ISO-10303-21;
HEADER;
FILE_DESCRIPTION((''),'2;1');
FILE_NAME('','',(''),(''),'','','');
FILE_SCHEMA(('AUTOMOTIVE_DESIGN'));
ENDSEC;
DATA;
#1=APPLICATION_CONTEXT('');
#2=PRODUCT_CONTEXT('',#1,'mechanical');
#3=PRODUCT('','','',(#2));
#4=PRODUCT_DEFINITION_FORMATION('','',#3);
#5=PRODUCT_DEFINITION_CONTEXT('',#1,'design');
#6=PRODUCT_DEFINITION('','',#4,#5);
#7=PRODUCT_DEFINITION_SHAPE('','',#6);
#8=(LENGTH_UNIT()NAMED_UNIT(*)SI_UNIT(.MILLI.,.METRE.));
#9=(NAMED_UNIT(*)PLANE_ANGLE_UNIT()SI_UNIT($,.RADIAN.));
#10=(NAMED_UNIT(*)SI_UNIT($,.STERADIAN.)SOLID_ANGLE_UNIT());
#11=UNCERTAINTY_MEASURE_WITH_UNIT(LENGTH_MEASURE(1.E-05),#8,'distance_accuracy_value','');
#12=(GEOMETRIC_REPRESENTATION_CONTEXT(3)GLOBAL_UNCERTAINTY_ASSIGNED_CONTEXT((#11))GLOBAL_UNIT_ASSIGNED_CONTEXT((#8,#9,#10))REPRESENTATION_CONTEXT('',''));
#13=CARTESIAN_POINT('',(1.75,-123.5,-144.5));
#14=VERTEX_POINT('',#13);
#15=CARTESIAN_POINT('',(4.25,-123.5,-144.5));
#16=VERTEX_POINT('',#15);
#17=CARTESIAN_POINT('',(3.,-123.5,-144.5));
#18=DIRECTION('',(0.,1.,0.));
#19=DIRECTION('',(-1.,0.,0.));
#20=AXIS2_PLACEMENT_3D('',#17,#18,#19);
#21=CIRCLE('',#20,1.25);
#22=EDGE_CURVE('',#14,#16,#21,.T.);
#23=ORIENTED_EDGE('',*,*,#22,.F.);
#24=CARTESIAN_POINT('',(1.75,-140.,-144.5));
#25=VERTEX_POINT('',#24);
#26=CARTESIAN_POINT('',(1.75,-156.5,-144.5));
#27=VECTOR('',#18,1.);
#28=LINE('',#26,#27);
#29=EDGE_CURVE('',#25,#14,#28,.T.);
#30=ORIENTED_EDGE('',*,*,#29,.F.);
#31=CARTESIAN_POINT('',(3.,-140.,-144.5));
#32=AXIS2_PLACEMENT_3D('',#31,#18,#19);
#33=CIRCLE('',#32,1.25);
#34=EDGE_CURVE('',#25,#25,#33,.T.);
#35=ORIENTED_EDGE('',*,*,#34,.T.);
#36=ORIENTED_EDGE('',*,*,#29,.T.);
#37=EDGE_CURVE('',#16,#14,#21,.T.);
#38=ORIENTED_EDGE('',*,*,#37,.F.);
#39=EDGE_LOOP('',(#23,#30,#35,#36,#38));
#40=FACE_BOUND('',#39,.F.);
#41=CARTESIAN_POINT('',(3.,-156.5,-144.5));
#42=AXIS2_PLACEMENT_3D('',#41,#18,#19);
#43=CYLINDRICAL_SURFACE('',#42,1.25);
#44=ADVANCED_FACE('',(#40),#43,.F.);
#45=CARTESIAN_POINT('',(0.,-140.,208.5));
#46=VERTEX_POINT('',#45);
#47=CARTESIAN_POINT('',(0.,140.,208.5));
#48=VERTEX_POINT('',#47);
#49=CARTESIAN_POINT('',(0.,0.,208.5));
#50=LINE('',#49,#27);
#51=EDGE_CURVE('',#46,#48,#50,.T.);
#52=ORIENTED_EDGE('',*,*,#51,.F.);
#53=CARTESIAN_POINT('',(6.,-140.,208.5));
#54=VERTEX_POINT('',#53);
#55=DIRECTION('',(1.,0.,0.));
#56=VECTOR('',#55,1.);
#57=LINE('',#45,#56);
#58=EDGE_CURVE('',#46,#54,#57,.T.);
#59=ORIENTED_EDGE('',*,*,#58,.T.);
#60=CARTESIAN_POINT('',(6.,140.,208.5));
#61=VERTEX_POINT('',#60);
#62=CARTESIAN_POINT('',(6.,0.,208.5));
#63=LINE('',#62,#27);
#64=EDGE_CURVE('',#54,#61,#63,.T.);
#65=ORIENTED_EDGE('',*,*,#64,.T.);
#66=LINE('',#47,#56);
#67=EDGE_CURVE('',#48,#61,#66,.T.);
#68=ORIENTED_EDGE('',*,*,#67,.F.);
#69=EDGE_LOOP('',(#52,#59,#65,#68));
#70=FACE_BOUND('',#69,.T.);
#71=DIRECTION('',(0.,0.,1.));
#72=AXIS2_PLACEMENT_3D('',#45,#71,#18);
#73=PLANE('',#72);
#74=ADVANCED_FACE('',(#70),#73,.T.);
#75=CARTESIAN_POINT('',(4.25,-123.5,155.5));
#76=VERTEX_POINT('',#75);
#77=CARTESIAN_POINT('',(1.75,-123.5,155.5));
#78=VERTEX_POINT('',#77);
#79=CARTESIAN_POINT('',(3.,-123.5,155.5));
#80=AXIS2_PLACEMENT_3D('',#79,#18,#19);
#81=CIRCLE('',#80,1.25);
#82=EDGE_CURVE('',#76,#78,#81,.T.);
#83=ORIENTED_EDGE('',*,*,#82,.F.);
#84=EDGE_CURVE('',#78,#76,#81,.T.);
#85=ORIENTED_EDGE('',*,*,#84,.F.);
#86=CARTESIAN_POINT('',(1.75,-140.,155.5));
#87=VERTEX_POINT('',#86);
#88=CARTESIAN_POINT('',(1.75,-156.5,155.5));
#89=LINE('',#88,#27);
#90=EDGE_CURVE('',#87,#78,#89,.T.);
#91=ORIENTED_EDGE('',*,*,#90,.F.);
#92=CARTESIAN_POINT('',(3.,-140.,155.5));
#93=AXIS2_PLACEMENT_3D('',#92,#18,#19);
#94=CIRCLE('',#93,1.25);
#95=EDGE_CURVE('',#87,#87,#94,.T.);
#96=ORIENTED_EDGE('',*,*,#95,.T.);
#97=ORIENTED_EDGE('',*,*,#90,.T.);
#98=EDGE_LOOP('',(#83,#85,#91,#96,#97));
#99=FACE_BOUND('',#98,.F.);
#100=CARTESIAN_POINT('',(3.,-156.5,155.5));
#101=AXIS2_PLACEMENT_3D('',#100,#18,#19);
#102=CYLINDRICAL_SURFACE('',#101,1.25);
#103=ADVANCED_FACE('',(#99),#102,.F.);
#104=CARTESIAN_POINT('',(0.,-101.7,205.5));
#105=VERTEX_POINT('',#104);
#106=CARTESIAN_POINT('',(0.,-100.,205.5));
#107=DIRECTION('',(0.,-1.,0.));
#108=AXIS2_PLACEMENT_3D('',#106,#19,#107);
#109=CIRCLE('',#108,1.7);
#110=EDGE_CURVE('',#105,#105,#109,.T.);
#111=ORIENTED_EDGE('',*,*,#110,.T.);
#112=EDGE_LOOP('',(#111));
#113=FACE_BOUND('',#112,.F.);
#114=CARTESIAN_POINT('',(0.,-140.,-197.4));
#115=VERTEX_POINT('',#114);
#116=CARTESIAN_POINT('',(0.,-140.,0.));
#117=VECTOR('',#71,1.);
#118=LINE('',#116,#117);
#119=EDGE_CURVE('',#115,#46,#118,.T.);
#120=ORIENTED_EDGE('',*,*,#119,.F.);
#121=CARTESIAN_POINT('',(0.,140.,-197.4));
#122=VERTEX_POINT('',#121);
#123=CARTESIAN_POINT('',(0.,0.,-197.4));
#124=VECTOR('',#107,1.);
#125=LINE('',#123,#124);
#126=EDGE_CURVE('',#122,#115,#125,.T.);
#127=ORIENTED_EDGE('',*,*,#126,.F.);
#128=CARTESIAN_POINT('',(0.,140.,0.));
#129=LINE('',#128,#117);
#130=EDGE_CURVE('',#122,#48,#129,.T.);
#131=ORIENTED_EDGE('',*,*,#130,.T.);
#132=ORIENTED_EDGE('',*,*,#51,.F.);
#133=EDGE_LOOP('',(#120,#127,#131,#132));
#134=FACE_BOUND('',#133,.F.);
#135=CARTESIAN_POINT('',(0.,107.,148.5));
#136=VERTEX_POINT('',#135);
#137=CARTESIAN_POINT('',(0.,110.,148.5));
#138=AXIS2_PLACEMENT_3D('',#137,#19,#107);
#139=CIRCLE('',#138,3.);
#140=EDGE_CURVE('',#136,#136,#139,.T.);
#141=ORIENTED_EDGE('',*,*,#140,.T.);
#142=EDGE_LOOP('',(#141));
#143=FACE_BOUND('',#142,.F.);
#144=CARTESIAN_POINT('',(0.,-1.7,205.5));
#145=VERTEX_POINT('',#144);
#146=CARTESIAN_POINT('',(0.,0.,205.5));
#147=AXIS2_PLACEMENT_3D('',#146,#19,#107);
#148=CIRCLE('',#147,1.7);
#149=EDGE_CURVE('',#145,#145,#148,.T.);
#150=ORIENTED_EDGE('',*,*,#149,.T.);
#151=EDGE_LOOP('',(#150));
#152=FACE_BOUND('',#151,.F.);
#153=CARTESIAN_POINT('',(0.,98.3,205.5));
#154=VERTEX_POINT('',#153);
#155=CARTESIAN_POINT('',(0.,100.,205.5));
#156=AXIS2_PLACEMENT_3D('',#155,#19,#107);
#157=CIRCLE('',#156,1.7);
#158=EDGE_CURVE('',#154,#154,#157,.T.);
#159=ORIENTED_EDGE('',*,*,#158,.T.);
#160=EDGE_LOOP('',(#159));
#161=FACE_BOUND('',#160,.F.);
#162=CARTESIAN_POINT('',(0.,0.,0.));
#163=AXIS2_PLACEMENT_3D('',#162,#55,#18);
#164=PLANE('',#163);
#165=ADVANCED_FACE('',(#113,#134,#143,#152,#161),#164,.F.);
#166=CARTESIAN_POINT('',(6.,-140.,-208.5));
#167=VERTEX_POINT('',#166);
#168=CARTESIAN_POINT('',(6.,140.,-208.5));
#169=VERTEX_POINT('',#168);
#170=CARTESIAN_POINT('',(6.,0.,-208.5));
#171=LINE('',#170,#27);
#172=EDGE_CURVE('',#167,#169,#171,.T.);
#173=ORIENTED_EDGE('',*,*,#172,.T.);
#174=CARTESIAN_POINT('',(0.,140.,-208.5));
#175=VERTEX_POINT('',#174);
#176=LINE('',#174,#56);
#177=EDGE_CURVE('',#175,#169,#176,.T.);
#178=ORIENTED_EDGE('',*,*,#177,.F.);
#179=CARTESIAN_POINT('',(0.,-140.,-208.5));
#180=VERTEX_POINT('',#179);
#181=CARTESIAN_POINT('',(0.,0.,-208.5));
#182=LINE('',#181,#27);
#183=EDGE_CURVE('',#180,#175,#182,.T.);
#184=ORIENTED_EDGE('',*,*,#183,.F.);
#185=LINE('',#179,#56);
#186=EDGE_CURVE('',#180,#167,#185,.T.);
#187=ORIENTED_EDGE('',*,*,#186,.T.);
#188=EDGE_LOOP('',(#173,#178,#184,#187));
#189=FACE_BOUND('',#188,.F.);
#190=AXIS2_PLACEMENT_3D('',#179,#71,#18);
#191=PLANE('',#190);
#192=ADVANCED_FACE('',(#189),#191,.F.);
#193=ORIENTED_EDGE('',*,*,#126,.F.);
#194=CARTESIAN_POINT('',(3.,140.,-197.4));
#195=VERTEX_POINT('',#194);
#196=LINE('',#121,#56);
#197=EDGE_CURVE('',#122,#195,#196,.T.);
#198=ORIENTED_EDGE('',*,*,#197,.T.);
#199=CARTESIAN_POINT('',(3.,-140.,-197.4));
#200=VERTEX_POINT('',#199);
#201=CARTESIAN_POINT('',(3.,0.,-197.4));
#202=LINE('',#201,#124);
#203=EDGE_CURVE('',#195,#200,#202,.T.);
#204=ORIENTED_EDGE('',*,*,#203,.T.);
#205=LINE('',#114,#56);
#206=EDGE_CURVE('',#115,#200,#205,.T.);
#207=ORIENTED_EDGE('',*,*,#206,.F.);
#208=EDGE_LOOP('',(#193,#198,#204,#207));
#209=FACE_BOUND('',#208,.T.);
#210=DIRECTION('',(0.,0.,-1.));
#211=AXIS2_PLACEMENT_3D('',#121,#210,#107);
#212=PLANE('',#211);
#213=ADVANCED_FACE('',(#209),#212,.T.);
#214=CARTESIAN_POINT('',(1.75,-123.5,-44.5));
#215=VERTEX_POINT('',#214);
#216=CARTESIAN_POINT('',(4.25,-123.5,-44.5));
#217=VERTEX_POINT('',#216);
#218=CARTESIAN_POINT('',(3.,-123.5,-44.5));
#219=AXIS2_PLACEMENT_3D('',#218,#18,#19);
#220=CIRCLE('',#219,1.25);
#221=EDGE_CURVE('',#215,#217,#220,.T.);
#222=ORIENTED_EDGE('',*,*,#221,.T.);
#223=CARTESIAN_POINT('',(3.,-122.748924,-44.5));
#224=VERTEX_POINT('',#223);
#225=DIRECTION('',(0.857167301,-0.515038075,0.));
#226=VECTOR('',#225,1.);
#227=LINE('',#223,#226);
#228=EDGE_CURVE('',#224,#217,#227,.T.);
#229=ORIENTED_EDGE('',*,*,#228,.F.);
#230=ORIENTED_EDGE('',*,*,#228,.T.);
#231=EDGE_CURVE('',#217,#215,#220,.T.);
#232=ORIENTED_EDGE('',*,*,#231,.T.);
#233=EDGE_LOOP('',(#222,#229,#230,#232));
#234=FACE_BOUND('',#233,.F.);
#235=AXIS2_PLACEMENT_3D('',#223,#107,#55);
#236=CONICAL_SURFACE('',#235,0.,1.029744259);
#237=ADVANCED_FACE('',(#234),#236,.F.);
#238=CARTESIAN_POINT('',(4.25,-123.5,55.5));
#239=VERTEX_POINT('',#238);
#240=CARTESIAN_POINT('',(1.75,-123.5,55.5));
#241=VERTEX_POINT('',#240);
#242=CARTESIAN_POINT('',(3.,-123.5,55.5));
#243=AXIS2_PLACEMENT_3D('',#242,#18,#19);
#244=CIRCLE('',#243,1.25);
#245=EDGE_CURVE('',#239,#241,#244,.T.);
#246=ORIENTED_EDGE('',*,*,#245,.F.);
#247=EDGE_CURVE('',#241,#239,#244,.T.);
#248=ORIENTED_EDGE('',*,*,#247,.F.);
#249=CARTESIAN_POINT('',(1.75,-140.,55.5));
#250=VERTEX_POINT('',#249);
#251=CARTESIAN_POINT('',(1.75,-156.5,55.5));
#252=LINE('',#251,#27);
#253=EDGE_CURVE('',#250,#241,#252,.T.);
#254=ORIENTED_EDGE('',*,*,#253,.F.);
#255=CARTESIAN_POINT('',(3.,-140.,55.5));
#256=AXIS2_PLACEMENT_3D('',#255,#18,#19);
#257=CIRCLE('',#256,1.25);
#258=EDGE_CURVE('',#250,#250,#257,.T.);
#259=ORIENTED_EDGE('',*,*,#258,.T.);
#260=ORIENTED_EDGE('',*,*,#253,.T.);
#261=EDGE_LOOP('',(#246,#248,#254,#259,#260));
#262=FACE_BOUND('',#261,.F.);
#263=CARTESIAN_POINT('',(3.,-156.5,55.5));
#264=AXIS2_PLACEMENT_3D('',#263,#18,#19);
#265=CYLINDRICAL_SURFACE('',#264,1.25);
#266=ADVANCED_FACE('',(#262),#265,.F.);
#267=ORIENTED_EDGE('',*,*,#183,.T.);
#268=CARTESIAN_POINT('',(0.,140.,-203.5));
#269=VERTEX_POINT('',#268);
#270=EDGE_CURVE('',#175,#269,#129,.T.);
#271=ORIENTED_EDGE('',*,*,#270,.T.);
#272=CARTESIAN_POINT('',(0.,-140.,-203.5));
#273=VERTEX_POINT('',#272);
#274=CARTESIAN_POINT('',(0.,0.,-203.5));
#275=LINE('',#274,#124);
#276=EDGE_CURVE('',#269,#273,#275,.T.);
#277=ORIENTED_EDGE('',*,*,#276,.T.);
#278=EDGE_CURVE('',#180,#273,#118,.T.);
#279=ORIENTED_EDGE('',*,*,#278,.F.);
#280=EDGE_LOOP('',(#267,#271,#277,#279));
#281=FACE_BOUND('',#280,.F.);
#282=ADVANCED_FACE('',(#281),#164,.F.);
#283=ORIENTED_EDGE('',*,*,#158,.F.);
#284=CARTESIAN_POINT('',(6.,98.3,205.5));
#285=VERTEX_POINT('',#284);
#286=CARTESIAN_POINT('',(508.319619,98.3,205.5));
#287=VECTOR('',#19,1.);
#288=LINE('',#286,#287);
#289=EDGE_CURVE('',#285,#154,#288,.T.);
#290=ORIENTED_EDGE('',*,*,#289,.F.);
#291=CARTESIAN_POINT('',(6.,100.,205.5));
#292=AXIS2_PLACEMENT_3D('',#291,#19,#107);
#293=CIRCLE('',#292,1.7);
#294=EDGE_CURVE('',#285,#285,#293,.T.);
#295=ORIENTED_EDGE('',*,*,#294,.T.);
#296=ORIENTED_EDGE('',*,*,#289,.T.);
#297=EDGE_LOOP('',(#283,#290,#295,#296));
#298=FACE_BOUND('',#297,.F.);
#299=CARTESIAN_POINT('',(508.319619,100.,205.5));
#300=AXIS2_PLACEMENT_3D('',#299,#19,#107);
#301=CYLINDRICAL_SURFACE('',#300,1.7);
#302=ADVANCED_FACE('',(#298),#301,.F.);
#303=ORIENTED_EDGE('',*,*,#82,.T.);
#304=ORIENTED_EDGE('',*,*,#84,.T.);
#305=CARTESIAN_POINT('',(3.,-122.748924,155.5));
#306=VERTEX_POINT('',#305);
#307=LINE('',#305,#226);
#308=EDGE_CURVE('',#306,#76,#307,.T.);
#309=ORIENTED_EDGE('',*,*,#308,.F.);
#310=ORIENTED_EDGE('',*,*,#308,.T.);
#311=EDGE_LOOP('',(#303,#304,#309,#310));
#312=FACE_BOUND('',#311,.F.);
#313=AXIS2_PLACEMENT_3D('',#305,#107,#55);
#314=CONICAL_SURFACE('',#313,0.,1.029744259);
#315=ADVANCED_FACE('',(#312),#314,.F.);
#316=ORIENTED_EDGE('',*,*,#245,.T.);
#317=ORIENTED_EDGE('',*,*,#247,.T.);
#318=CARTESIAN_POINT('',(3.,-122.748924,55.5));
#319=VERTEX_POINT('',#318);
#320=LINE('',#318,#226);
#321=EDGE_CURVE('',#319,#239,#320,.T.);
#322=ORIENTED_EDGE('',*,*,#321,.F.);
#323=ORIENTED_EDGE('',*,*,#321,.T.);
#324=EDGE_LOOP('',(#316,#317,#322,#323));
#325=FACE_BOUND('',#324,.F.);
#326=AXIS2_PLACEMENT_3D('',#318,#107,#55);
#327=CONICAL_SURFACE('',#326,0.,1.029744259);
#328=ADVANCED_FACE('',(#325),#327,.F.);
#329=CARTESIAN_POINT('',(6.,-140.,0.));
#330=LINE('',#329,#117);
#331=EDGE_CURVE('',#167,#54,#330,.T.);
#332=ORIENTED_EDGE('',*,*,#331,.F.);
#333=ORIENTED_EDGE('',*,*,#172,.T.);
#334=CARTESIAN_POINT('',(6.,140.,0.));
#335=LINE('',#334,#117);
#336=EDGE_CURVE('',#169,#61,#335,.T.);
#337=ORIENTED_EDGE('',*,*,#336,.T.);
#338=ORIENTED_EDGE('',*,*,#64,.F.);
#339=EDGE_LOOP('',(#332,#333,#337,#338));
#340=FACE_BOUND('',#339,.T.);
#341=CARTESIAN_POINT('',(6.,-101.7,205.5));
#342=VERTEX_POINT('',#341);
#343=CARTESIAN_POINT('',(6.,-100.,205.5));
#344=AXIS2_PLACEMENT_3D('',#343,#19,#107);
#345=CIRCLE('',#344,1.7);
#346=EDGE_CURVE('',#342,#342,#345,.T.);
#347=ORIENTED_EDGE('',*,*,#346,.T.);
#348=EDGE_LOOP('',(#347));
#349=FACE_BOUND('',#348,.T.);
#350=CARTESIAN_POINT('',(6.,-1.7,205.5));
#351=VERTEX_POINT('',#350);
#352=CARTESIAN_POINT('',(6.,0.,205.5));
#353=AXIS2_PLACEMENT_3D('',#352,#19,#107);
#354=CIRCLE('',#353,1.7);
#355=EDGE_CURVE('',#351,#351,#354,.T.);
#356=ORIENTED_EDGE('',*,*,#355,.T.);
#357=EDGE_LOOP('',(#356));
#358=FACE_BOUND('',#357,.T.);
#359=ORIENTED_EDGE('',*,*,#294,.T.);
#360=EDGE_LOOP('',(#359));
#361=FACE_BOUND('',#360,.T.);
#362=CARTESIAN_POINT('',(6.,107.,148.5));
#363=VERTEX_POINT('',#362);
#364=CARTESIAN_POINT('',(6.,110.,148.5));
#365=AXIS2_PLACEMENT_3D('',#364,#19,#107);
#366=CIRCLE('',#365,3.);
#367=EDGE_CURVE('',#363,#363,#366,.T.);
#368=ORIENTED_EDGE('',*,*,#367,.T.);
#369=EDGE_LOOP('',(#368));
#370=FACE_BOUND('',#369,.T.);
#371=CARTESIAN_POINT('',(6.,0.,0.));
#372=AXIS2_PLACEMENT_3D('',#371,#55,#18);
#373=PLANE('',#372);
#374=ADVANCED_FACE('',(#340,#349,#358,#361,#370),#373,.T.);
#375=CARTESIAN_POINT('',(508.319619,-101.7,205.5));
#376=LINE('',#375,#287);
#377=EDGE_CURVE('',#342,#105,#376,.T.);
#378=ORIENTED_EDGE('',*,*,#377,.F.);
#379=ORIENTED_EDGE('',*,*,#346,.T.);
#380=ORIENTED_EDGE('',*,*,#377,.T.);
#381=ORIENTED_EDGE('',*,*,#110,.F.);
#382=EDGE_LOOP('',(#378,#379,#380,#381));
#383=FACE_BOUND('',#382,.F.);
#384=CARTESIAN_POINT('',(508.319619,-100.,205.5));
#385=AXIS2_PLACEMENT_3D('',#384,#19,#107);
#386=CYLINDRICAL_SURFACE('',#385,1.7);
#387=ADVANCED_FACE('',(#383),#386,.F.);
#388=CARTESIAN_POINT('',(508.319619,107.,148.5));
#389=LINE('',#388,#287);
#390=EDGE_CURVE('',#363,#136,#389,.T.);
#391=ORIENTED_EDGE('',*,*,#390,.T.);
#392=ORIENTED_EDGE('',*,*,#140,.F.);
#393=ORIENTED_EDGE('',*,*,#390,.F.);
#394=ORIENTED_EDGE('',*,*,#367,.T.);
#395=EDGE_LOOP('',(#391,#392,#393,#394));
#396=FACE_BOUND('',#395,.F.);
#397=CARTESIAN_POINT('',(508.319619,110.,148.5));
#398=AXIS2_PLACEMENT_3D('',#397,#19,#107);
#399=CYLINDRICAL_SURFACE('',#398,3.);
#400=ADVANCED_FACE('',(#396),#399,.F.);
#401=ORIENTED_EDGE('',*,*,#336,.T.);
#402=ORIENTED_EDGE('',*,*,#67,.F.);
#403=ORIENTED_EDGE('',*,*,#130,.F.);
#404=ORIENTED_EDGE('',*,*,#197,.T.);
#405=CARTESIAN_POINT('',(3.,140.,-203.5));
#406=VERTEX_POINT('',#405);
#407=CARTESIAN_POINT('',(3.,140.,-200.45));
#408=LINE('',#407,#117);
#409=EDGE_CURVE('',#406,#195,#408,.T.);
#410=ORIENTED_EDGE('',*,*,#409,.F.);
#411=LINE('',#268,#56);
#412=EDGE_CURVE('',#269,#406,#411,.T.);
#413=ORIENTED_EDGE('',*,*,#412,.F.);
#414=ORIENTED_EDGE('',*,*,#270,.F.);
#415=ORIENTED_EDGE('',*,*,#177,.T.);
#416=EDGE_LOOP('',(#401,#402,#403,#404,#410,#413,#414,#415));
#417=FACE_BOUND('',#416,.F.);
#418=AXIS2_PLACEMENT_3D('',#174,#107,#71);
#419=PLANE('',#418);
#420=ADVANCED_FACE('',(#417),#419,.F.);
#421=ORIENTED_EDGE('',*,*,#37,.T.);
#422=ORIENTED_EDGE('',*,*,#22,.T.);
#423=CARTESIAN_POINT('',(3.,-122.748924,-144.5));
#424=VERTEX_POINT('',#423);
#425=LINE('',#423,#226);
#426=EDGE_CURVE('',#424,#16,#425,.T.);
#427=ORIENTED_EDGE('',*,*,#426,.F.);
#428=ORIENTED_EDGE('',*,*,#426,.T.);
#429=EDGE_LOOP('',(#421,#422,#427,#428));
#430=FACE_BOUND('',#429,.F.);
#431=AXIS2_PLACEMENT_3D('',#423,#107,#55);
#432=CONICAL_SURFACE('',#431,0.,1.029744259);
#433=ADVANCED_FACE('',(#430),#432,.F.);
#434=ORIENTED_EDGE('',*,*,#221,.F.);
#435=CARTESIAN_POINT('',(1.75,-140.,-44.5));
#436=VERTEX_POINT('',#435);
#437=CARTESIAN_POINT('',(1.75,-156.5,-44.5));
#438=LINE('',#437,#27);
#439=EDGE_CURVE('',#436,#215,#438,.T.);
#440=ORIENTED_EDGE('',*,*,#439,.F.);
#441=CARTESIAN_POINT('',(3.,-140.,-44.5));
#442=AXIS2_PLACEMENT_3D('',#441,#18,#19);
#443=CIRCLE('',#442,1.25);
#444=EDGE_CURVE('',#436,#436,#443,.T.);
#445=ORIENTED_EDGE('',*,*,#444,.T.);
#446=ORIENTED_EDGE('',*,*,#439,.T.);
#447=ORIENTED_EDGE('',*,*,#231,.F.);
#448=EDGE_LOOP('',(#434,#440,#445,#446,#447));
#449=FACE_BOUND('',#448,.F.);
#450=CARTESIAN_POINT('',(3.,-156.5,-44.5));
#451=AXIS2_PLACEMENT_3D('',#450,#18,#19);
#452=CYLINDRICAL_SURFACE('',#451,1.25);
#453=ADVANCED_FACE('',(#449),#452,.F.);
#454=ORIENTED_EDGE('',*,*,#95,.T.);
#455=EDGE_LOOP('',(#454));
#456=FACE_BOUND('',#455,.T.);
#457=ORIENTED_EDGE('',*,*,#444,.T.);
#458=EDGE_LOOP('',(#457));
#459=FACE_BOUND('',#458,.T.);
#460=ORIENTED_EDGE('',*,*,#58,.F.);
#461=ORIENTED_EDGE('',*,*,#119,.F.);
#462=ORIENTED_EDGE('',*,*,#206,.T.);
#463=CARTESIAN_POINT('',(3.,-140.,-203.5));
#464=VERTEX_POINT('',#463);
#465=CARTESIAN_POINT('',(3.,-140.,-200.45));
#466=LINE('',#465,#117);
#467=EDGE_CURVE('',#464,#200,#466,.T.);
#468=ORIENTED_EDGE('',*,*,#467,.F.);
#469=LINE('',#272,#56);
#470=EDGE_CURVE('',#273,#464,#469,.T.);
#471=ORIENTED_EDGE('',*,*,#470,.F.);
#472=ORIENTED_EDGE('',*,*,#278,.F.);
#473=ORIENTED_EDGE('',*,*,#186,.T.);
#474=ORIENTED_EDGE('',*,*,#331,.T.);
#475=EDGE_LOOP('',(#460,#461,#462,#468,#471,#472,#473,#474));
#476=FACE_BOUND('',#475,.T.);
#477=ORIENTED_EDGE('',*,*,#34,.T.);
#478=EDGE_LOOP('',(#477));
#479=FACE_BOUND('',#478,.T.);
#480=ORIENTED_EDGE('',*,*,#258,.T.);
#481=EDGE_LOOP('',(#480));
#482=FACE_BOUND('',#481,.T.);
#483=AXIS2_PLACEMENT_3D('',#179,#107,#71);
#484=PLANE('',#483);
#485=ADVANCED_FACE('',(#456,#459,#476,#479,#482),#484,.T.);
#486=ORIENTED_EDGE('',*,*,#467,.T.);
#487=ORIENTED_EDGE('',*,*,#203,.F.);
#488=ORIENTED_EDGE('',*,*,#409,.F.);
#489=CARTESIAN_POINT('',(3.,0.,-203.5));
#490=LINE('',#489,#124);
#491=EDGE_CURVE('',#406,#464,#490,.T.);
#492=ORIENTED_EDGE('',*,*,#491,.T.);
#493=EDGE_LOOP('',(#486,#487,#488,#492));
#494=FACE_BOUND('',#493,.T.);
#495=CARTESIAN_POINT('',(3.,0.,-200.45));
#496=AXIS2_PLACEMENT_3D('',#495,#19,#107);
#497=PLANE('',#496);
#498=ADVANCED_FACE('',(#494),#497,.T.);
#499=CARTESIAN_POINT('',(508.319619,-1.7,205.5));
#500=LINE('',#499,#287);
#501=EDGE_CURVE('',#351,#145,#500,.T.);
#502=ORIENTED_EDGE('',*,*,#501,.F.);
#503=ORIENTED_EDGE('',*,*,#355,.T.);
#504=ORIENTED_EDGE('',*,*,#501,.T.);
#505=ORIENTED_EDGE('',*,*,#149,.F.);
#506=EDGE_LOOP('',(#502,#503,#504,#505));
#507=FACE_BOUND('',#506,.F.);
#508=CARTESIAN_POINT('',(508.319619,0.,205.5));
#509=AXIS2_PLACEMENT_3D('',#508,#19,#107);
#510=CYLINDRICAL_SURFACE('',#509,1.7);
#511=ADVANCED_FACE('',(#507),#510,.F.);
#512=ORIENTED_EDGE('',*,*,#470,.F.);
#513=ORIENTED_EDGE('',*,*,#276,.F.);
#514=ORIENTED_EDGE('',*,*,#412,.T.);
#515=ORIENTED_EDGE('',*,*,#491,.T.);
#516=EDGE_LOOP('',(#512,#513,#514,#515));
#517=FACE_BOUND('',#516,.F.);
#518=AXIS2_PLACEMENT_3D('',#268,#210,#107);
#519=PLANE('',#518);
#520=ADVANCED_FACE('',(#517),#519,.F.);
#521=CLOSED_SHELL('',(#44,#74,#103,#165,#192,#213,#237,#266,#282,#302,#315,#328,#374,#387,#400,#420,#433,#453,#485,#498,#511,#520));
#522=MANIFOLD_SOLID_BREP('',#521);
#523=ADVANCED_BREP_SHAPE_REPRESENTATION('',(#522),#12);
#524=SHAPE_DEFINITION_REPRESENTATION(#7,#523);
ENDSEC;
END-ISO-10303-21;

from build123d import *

# Parameters (mm, degrees)
F0_W      = 280
F0_H      = 417
F1_DEPTH  = 6
F3_D      = 3.4
F4_W      = 280
F4_H      = 6.1
F5_DEPTH  = 3
F8_D      = 2.5
F8_DEPTH  = 16.5
F8_TIP    = 0.7510757738
F9_D      = 6
F10_D     = 2.5
F10_DEPTH = 16.5
F10_TIP   = 0.7510757738


# Not quite as in the source:
# - a feature names something its author has since deleted; it is built from what else it names


with BuildPart() as f1:
    # F0 (on Right) → F1 (new body)
    with BuildSketch(Plane.YZ):
        Rectangle(F0_W, F0_H)
    extrude(amount=F1_DEPTH)

    # F3 (through all)
    with Locations(Plane.YZ.offset(6)):
        with Locations((100, 205.5), (0, 205.5), (-100, 205.5)):
            Hole(F3_D / 2)


with BuildPart() as f5:
    # F4 (on face) → F5 (new body)
    with BuildSketch(Plane(origin=(0, 0, 0), x_dir=(0, -1, 0), z_dir=(-1, 0, 0))):
        with Locations((0, -200.45)):
            Rectangle(F4_W, F4_H)
    extrude(amount=-F5_DEPTH)


with BuildPart() as f1_1:
    add(f1.part)

    # F6: cut F5
    add(f5.part, mode=Mode.SUBTRACT)

    # F8
    with Locations(Plane.XZ.offset(140)):
        with Locations((3, 155.5), (3, 55.5), (3, -44.5)):
            Hole(F8_D / 2, depth=F8_DEPTH)
            with Locations((0, 0, -(F8_DEPTH + F8_TIP / 2))):  # 118° drill point
                Cone(0, F8_D / 2, F8_TIP, mode=Mode.SUBTRACT)

    # F9 (through all)
    with Locations(Plane.YZ.offset(6)):
        with Locations((110, 148.5)):
            Hole(F9_D / 2)

    # F10
    with Locations(Plane.XZ.offset(140)):
        with Locations((3, -144.5)):
            Hole(F10_D / 2, depth=F10_DEPTH)
            with Locations((0, 0, -(F10_DEPTH + F10_TIP / 2))):  # 118° drill point
                Cone(0, F10_D / 2, F10_TIP, mode=Mode.SUBTRACT)


solid = f1_1.part
